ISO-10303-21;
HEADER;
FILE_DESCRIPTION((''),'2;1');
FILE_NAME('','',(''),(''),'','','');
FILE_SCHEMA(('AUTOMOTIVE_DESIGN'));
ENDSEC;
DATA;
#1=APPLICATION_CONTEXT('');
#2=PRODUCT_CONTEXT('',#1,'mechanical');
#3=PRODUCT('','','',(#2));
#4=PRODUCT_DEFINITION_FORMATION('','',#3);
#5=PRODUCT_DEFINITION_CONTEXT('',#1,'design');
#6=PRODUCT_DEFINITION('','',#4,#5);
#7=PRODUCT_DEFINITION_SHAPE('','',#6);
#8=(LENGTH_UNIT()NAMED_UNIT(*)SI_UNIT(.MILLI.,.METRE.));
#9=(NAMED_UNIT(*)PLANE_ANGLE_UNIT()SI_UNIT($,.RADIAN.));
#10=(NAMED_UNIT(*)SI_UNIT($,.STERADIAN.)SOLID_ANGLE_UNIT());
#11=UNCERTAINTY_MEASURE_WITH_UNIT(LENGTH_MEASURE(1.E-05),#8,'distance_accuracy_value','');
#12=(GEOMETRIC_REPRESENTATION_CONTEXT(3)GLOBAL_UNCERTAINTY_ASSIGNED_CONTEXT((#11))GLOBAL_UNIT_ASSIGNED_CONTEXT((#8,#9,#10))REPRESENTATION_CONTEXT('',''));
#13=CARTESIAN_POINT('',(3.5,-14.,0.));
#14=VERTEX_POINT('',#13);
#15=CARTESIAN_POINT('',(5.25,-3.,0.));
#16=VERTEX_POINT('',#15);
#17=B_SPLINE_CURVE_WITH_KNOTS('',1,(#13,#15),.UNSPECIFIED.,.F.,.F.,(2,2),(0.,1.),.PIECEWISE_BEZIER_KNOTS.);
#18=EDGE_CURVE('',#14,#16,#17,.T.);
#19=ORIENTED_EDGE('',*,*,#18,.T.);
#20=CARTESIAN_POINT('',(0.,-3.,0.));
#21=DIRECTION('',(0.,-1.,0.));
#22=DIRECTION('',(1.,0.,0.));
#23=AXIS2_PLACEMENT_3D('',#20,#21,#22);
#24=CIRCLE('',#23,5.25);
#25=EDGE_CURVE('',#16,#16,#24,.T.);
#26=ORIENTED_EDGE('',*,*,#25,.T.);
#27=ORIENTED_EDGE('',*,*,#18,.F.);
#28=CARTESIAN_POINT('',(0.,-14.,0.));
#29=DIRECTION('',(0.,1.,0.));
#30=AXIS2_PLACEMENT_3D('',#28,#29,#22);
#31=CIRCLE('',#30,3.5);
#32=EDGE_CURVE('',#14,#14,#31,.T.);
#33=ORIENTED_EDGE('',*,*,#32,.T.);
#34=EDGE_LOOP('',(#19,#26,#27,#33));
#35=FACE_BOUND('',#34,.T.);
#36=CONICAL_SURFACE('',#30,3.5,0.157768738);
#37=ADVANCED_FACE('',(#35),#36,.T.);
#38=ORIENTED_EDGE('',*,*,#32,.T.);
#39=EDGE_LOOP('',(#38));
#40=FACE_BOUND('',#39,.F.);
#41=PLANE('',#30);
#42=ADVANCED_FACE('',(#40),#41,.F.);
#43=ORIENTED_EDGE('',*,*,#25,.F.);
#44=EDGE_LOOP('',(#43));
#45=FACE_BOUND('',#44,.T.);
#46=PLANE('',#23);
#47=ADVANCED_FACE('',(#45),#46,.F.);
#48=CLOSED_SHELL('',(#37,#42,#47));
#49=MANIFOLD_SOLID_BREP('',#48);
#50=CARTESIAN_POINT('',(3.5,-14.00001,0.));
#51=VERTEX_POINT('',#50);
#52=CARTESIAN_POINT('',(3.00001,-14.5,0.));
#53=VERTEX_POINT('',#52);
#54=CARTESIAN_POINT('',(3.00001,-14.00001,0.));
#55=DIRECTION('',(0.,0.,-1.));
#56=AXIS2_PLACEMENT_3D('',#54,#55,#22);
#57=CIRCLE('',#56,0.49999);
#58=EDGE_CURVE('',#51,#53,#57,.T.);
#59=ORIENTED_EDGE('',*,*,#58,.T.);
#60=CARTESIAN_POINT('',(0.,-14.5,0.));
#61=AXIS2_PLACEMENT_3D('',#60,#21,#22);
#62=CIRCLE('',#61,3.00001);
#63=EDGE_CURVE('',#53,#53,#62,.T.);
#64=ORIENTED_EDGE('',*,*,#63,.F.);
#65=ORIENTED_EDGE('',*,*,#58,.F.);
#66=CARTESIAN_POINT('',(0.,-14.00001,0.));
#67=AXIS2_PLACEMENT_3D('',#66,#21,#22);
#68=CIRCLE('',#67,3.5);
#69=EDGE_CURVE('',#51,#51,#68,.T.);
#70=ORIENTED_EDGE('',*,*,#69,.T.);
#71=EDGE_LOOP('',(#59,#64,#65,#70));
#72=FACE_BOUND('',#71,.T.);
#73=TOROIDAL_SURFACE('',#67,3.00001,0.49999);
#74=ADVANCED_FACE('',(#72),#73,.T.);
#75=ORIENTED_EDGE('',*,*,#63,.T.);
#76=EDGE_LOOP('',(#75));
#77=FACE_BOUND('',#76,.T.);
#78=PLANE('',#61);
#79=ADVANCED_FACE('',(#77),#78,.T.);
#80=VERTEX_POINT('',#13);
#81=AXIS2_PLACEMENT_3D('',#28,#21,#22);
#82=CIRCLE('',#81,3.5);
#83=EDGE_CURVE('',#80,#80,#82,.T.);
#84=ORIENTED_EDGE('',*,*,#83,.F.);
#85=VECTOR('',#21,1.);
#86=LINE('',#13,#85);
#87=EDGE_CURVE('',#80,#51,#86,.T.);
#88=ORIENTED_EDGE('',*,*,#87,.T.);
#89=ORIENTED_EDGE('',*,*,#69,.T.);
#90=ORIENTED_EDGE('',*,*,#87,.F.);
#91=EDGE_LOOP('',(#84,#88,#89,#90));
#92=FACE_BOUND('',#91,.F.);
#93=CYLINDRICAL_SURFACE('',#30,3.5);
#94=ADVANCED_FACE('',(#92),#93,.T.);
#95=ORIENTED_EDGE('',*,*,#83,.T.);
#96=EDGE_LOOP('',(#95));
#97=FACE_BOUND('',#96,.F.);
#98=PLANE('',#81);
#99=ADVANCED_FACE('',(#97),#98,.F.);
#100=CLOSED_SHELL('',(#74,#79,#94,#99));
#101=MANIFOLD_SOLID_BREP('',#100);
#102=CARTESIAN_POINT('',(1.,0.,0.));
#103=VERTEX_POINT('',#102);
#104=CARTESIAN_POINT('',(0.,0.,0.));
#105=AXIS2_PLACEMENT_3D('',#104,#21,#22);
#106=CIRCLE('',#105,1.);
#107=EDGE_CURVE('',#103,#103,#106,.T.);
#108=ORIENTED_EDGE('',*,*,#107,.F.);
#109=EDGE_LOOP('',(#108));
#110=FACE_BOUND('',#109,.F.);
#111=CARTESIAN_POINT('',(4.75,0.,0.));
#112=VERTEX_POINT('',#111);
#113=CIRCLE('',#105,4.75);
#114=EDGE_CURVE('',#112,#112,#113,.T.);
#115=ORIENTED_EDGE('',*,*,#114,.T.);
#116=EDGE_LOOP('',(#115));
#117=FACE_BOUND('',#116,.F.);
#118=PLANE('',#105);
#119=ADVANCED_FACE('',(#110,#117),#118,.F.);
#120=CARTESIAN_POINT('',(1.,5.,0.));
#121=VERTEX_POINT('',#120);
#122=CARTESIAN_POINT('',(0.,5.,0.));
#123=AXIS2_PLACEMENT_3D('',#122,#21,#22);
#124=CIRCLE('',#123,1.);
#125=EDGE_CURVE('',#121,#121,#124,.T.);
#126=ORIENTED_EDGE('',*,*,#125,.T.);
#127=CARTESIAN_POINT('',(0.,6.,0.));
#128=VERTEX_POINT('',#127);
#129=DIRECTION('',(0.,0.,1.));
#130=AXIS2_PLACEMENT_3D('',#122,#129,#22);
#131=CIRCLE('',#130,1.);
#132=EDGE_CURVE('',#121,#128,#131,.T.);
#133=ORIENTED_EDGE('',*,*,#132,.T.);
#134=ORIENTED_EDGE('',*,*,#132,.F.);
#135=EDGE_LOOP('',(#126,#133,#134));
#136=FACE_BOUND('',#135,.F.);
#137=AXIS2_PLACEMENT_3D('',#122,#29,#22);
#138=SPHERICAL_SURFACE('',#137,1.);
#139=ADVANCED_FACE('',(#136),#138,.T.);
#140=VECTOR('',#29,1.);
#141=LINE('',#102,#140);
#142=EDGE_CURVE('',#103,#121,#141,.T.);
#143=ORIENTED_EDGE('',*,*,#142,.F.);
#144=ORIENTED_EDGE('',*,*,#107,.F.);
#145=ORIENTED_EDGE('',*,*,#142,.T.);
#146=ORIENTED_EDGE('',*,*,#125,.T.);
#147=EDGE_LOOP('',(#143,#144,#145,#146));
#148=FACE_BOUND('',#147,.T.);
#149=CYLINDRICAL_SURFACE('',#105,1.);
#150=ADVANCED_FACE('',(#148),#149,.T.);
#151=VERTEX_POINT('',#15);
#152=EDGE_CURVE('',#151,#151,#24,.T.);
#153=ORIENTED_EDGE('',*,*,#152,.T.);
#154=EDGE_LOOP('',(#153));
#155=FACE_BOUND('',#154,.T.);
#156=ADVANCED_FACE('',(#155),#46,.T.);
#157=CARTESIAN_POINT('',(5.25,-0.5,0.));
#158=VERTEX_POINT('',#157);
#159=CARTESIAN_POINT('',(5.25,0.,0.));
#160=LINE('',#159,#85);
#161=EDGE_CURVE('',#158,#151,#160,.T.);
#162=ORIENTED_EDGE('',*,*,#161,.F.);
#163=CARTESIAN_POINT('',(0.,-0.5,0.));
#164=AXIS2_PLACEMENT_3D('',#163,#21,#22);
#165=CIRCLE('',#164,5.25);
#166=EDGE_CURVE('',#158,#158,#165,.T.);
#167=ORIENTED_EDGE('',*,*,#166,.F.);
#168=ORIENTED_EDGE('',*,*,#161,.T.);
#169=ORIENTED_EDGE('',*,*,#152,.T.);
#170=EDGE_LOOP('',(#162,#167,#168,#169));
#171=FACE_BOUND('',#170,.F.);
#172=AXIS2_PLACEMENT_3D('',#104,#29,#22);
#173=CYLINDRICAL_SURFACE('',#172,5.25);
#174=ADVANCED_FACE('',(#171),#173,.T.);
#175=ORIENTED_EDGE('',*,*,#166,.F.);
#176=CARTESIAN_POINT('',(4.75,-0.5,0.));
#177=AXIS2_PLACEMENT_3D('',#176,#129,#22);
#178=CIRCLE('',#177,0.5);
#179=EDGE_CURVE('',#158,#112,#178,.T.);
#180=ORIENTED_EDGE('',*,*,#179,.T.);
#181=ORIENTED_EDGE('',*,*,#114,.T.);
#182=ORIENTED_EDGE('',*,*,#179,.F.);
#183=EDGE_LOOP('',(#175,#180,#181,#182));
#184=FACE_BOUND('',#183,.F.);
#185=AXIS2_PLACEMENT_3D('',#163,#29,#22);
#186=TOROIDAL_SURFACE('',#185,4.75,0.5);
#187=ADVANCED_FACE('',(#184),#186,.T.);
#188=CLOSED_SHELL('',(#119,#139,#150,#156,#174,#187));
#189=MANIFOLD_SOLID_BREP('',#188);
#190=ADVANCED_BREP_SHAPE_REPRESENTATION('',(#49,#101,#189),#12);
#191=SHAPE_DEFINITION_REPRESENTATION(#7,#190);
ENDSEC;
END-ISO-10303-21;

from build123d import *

# Parameters (mm, degrees)
F2_R      = 3.5
F3_DEPTH  = 0.5
F0_R      = 5.25
F4_DEPTH  = 3
F5_R      = 1
F6_DEPTH  = 6
F3_FACE_R = 3.5
F4_FACE_R = 5.25
F8_R      = 0.49999
F9_R      = 0.5
F10_R     = 1


# Not quite as in the source:
# - a fillet or chamfer is up to 0.001 mm smaller than in the source, because OpenCascade refuses the exact size


with BuildPart() as f3:
    # F2 (on offset) → F3 (new body)
    with BuildSketch(Plane.XZ.offset(14)):
        Circle(F2_R)
    extrude(amount=F3_DEPTH)

    # F8 (radius 0.5 in the source; OpenCascade refuses exactly that, so slightly less here)
    f8_edges = [f3.edges().sort_by_distance(p)[0] for p in [
        (-3.5, -14.5, 0),
    ]]
    fillet(f8_edges, radius=F8_R)


with BuildPart() as f4:
    # F0 (on Front) → F4 (new body)
    with BuildSketch(Plane.XZ):
        Circle(F0_R)
    extrude(amount=F4_DEPTH)

    # F5 (on Front) → F6 (join)
    with BuildSketch(Plane.XZ):
        Circle(F5_R)
    extrude(amount=-F6_DEPTH)

    # F9
    f9_edges = [f4.edges().sort_by_distance(p)[0] for p in [
        (-5.25, 0, 0),
    ]]
    fillet(f9_edges, radius=F9_R)

    # F10
    f10_edges = [f4.edges().sort_by_distance(p)[0] for p in [
        (-1, 6, 0),
    ]]
    fillet(f10_edges, radius=F10_R)


with BuildPart() as f7:
    # F3_face (on face) → F7 section 0
    with BuildSketch(Plane(origin=(0, -14, 0), x_dir=(1, 0, 0), z_dir=(0, 1, 0))):
        Circle(F3_FACE_R)
    # F4_face (on face) → F7 section 1
    with BuildSketch(Plane.XZ.offset(3)):
        Circle(F4_FACE_R)
    loft()


solid = Compound([f3.part, f4.part, f7.part])
